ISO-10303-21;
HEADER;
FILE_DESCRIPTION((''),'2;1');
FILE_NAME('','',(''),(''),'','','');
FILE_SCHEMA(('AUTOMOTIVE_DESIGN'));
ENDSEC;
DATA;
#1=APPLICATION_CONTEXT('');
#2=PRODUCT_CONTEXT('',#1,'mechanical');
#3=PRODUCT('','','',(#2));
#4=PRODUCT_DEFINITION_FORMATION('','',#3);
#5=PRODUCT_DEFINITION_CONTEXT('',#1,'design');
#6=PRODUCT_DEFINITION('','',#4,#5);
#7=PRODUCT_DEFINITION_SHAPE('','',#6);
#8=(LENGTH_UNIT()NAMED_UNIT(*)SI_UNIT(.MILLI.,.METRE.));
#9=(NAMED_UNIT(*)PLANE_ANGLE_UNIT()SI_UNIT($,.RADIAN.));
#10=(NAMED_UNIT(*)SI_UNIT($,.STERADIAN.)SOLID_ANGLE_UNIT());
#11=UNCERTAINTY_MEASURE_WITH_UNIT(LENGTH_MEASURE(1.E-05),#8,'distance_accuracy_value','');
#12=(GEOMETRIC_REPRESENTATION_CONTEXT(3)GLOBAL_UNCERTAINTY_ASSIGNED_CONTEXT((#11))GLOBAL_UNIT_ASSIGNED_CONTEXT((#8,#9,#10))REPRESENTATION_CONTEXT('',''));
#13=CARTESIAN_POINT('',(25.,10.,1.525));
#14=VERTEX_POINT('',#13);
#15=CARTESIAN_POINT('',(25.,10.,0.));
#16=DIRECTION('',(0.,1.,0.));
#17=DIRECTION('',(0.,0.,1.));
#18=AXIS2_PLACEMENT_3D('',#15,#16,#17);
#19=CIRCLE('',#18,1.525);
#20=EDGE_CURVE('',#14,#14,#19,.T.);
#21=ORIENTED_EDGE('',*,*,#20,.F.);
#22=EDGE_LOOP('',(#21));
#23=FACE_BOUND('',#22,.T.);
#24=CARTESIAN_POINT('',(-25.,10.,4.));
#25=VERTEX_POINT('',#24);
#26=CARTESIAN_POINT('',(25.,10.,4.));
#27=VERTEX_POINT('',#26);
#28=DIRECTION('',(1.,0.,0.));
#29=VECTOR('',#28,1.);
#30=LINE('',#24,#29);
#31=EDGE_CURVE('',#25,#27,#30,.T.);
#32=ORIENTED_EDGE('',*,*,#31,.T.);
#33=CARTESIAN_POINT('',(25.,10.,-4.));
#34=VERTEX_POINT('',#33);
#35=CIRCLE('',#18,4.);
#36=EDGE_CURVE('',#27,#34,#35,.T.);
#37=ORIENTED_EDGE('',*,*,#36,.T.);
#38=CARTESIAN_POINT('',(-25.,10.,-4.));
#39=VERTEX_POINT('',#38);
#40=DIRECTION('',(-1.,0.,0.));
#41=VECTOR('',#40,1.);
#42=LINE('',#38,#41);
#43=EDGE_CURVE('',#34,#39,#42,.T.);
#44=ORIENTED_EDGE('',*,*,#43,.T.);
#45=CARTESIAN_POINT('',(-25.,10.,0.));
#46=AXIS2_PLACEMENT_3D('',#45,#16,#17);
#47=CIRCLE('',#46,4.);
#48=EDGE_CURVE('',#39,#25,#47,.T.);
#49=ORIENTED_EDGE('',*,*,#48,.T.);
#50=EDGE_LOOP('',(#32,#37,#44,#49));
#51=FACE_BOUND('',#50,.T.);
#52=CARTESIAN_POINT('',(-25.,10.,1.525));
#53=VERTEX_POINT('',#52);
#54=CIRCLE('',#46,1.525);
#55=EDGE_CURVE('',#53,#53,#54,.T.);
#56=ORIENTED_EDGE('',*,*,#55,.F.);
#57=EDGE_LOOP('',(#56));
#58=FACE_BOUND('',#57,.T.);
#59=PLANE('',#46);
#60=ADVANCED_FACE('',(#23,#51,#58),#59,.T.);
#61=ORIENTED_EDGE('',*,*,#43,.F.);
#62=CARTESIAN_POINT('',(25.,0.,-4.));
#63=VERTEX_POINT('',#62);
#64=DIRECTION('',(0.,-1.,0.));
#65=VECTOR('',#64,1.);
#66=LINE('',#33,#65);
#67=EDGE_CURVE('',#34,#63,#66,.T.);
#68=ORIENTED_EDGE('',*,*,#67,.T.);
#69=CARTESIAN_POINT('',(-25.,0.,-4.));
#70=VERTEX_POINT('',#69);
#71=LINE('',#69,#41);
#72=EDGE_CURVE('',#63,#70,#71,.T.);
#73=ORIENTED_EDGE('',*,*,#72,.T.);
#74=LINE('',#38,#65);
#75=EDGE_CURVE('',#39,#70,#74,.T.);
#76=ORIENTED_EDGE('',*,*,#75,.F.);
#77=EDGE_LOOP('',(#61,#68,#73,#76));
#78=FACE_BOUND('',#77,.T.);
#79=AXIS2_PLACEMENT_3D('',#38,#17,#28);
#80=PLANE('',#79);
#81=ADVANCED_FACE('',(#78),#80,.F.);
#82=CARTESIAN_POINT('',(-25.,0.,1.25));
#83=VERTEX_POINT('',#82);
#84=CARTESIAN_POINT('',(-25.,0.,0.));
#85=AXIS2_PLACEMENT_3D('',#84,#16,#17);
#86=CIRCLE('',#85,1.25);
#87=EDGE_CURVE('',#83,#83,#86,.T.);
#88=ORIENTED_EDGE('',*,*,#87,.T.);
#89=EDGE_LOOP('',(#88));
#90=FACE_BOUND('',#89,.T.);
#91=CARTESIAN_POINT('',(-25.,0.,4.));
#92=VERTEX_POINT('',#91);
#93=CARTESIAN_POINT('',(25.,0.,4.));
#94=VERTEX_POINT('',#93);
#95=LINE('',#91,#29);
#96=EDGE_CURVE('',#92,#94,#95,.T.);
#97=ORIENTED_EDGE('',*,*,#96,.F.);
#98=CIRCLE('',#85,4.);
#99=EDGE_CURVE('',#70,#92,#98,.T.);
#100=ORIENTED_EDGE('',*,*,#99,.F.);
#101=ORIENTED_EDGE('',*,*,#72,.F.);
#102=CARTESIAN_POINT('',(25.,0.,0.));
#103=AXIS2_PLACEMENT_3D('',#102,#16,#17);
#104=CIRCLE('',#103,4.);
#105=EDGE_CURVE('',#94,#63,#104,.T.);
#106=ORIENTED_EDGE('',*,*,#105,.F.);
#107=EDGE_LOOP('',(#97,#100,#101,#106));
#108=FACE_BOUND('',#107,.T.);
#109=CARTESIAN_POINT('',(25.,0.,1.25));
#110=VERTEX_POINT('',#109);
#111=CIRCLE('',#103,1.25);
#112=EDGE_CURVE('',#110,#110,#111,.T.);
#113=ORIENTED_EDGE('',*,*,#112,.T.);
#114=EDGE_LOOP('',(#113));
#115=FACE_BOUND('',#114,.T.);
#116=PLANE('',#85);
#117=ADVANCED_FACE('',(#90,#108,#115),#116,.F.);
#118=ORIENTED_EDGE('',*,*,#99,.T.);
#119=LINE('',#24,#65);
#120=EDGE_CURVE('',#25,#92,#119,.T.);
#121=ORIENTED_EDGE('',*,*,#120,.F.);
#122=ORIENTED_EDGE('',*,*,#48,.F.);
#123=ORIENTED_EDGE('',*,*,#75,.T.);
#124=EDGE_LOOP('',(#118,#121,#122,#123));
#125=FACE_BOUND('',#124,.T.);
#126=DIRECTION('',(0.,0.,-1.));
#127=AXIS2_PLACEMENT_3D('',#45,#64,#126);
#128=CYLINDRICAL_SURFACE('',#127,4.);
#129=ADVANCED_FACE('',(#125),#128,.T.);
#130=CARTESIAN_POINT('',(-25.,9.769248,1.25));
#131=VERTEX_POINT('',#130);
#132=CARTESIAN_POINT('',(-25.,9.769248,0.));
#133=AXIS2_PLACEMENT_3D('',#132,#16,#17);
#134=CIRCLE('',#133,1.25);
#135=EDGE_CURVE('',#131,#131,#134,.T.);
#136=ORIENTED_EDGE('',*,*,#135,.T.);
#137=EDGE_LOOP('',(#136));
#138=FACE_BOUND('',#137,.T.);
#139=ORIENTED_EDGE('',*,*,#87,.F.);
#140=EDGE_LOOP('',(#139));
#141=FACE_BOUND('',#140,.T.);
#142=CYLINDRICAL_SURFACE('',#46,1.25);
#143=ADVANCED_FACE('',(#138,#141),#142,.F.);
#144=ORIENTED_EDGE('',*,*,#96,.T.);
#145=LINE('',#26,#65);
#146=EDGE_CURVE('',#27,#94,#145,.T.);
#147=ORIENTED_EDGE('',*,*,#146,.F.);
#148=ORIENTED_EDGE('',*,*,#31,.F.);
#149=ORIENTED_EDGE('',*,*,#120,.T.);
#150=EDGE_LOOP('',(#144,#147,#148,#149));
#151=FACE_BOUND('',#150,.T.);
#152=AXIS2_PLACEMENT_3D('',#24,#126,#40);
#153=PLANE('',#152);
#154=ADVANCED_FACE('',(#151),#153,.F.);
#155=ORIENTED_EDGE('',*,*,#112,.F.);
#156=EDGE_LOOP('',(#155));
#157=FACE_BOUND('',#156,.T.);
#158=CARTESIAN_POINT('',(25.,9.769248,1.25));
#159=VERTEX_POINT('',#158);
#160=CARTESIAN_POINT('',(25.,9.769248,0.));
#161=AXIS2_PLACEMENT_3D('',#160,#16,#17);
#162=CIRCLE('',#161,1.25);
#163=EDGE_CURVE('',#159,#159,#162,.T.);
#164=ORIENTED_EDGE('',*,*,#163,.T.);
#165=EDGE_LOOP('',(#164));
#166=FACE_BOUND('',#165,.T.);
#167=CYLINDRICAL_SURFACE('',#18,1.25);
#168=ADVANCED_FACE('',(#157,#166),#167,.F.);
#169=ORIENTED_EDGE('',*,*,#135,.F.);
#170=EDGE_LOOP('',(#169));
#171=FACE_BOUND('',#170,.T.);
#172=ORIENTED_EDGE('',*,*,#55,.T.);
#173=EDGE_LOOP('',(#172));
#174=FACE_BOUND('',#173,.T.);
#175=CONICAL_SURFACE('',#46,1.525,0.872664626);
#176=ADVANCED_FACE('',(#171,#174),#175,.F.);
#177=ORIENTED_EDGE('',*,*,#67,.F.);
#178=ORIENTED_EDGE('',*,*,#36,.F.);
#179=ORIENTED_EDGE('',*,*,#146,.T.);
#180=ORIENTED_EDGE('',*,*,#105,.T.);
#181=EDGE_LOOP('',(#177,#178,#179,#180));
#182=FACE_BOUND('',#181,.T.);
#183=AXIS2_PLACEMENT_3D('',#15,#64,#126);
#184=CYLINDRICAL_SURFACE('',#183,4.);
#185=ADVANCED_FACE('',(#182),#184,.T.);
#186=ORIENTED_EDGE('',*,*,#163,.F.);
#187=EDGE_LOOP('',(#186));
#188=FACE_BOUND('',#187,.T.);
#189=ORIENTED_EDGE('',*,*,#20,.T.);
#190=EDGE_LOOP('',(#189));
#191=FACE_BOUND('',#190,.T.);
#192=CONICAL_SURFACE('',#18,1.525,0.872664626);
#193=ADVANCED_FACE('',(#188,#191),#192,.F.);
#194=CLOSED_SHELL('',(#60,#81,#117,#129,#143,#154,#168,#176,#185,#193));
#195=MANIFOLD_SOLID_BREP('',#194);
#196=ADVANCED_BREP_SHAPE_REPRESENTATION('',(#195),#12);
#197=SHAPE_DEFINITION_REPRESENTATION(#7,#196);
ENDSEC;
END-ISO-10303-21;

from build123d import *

# Parameters (mm, degrees)
BOSS_EXTRUDE1_DEPTH = 10


# Read off the part's stored shape, not the designer's step: M3x0.5 Tapped Hole1
with BuildPart() as part:
    # Sketch1 → Boss-Extrude1 (new body)
    with BuildSketch(Plane(origin=(0, 0, 0), x_dir=(1, 0, 0), z_dir=(0, 1, 0))):
        with BuildLine():
            Line((-25, 4), (25, 4))
            ThreePointArc((25, 4), (29, 0), (25, -4))
            Line((25, -4), (-25, -4))
            ThreePointArc((-25, -4), (-29, 0), (-25, 4))
        make_face()
    extrude(amount=BOSS_EXTRUDE1_DEPTH)

    # M3x0.5 Tapped Hole1 outline → M3x0.5 Tapped Hole1 (revolve, cut)
    with BuildSketch(Plane(origin=(-25, 0, 0), x_dir=(1, 0, 0), z_dir=(0, 0, 1))):
        Polygon((0, 0), (1.25, 0), (1.25, 9.769247601), (1.525, 10), (0, 10), align=None)
    revolve(axis=Axis((-25, 0, 0), (0, 1, 0)), mode=Mode.SUBTRACT)

    # M3x0.5 Tapped Hole1 2 outline → M3x0.5 Tapped Hole1 2 (revolve, cut)
    with BuildSketch(Plane(origin=(25, 0, 0), x_dir=(1, 0, 0), z_dir=(0, 0, 1))):
        Polygon((0, 0), (1.25, 0), (1.25, 9.769247601), (1.525, 10), (0, 10), align=None)
    revolve(axis=Axis((25, 0, 0), (0, 1, 0)), mode=Mode.SUBTRACT)


solid = part.part
